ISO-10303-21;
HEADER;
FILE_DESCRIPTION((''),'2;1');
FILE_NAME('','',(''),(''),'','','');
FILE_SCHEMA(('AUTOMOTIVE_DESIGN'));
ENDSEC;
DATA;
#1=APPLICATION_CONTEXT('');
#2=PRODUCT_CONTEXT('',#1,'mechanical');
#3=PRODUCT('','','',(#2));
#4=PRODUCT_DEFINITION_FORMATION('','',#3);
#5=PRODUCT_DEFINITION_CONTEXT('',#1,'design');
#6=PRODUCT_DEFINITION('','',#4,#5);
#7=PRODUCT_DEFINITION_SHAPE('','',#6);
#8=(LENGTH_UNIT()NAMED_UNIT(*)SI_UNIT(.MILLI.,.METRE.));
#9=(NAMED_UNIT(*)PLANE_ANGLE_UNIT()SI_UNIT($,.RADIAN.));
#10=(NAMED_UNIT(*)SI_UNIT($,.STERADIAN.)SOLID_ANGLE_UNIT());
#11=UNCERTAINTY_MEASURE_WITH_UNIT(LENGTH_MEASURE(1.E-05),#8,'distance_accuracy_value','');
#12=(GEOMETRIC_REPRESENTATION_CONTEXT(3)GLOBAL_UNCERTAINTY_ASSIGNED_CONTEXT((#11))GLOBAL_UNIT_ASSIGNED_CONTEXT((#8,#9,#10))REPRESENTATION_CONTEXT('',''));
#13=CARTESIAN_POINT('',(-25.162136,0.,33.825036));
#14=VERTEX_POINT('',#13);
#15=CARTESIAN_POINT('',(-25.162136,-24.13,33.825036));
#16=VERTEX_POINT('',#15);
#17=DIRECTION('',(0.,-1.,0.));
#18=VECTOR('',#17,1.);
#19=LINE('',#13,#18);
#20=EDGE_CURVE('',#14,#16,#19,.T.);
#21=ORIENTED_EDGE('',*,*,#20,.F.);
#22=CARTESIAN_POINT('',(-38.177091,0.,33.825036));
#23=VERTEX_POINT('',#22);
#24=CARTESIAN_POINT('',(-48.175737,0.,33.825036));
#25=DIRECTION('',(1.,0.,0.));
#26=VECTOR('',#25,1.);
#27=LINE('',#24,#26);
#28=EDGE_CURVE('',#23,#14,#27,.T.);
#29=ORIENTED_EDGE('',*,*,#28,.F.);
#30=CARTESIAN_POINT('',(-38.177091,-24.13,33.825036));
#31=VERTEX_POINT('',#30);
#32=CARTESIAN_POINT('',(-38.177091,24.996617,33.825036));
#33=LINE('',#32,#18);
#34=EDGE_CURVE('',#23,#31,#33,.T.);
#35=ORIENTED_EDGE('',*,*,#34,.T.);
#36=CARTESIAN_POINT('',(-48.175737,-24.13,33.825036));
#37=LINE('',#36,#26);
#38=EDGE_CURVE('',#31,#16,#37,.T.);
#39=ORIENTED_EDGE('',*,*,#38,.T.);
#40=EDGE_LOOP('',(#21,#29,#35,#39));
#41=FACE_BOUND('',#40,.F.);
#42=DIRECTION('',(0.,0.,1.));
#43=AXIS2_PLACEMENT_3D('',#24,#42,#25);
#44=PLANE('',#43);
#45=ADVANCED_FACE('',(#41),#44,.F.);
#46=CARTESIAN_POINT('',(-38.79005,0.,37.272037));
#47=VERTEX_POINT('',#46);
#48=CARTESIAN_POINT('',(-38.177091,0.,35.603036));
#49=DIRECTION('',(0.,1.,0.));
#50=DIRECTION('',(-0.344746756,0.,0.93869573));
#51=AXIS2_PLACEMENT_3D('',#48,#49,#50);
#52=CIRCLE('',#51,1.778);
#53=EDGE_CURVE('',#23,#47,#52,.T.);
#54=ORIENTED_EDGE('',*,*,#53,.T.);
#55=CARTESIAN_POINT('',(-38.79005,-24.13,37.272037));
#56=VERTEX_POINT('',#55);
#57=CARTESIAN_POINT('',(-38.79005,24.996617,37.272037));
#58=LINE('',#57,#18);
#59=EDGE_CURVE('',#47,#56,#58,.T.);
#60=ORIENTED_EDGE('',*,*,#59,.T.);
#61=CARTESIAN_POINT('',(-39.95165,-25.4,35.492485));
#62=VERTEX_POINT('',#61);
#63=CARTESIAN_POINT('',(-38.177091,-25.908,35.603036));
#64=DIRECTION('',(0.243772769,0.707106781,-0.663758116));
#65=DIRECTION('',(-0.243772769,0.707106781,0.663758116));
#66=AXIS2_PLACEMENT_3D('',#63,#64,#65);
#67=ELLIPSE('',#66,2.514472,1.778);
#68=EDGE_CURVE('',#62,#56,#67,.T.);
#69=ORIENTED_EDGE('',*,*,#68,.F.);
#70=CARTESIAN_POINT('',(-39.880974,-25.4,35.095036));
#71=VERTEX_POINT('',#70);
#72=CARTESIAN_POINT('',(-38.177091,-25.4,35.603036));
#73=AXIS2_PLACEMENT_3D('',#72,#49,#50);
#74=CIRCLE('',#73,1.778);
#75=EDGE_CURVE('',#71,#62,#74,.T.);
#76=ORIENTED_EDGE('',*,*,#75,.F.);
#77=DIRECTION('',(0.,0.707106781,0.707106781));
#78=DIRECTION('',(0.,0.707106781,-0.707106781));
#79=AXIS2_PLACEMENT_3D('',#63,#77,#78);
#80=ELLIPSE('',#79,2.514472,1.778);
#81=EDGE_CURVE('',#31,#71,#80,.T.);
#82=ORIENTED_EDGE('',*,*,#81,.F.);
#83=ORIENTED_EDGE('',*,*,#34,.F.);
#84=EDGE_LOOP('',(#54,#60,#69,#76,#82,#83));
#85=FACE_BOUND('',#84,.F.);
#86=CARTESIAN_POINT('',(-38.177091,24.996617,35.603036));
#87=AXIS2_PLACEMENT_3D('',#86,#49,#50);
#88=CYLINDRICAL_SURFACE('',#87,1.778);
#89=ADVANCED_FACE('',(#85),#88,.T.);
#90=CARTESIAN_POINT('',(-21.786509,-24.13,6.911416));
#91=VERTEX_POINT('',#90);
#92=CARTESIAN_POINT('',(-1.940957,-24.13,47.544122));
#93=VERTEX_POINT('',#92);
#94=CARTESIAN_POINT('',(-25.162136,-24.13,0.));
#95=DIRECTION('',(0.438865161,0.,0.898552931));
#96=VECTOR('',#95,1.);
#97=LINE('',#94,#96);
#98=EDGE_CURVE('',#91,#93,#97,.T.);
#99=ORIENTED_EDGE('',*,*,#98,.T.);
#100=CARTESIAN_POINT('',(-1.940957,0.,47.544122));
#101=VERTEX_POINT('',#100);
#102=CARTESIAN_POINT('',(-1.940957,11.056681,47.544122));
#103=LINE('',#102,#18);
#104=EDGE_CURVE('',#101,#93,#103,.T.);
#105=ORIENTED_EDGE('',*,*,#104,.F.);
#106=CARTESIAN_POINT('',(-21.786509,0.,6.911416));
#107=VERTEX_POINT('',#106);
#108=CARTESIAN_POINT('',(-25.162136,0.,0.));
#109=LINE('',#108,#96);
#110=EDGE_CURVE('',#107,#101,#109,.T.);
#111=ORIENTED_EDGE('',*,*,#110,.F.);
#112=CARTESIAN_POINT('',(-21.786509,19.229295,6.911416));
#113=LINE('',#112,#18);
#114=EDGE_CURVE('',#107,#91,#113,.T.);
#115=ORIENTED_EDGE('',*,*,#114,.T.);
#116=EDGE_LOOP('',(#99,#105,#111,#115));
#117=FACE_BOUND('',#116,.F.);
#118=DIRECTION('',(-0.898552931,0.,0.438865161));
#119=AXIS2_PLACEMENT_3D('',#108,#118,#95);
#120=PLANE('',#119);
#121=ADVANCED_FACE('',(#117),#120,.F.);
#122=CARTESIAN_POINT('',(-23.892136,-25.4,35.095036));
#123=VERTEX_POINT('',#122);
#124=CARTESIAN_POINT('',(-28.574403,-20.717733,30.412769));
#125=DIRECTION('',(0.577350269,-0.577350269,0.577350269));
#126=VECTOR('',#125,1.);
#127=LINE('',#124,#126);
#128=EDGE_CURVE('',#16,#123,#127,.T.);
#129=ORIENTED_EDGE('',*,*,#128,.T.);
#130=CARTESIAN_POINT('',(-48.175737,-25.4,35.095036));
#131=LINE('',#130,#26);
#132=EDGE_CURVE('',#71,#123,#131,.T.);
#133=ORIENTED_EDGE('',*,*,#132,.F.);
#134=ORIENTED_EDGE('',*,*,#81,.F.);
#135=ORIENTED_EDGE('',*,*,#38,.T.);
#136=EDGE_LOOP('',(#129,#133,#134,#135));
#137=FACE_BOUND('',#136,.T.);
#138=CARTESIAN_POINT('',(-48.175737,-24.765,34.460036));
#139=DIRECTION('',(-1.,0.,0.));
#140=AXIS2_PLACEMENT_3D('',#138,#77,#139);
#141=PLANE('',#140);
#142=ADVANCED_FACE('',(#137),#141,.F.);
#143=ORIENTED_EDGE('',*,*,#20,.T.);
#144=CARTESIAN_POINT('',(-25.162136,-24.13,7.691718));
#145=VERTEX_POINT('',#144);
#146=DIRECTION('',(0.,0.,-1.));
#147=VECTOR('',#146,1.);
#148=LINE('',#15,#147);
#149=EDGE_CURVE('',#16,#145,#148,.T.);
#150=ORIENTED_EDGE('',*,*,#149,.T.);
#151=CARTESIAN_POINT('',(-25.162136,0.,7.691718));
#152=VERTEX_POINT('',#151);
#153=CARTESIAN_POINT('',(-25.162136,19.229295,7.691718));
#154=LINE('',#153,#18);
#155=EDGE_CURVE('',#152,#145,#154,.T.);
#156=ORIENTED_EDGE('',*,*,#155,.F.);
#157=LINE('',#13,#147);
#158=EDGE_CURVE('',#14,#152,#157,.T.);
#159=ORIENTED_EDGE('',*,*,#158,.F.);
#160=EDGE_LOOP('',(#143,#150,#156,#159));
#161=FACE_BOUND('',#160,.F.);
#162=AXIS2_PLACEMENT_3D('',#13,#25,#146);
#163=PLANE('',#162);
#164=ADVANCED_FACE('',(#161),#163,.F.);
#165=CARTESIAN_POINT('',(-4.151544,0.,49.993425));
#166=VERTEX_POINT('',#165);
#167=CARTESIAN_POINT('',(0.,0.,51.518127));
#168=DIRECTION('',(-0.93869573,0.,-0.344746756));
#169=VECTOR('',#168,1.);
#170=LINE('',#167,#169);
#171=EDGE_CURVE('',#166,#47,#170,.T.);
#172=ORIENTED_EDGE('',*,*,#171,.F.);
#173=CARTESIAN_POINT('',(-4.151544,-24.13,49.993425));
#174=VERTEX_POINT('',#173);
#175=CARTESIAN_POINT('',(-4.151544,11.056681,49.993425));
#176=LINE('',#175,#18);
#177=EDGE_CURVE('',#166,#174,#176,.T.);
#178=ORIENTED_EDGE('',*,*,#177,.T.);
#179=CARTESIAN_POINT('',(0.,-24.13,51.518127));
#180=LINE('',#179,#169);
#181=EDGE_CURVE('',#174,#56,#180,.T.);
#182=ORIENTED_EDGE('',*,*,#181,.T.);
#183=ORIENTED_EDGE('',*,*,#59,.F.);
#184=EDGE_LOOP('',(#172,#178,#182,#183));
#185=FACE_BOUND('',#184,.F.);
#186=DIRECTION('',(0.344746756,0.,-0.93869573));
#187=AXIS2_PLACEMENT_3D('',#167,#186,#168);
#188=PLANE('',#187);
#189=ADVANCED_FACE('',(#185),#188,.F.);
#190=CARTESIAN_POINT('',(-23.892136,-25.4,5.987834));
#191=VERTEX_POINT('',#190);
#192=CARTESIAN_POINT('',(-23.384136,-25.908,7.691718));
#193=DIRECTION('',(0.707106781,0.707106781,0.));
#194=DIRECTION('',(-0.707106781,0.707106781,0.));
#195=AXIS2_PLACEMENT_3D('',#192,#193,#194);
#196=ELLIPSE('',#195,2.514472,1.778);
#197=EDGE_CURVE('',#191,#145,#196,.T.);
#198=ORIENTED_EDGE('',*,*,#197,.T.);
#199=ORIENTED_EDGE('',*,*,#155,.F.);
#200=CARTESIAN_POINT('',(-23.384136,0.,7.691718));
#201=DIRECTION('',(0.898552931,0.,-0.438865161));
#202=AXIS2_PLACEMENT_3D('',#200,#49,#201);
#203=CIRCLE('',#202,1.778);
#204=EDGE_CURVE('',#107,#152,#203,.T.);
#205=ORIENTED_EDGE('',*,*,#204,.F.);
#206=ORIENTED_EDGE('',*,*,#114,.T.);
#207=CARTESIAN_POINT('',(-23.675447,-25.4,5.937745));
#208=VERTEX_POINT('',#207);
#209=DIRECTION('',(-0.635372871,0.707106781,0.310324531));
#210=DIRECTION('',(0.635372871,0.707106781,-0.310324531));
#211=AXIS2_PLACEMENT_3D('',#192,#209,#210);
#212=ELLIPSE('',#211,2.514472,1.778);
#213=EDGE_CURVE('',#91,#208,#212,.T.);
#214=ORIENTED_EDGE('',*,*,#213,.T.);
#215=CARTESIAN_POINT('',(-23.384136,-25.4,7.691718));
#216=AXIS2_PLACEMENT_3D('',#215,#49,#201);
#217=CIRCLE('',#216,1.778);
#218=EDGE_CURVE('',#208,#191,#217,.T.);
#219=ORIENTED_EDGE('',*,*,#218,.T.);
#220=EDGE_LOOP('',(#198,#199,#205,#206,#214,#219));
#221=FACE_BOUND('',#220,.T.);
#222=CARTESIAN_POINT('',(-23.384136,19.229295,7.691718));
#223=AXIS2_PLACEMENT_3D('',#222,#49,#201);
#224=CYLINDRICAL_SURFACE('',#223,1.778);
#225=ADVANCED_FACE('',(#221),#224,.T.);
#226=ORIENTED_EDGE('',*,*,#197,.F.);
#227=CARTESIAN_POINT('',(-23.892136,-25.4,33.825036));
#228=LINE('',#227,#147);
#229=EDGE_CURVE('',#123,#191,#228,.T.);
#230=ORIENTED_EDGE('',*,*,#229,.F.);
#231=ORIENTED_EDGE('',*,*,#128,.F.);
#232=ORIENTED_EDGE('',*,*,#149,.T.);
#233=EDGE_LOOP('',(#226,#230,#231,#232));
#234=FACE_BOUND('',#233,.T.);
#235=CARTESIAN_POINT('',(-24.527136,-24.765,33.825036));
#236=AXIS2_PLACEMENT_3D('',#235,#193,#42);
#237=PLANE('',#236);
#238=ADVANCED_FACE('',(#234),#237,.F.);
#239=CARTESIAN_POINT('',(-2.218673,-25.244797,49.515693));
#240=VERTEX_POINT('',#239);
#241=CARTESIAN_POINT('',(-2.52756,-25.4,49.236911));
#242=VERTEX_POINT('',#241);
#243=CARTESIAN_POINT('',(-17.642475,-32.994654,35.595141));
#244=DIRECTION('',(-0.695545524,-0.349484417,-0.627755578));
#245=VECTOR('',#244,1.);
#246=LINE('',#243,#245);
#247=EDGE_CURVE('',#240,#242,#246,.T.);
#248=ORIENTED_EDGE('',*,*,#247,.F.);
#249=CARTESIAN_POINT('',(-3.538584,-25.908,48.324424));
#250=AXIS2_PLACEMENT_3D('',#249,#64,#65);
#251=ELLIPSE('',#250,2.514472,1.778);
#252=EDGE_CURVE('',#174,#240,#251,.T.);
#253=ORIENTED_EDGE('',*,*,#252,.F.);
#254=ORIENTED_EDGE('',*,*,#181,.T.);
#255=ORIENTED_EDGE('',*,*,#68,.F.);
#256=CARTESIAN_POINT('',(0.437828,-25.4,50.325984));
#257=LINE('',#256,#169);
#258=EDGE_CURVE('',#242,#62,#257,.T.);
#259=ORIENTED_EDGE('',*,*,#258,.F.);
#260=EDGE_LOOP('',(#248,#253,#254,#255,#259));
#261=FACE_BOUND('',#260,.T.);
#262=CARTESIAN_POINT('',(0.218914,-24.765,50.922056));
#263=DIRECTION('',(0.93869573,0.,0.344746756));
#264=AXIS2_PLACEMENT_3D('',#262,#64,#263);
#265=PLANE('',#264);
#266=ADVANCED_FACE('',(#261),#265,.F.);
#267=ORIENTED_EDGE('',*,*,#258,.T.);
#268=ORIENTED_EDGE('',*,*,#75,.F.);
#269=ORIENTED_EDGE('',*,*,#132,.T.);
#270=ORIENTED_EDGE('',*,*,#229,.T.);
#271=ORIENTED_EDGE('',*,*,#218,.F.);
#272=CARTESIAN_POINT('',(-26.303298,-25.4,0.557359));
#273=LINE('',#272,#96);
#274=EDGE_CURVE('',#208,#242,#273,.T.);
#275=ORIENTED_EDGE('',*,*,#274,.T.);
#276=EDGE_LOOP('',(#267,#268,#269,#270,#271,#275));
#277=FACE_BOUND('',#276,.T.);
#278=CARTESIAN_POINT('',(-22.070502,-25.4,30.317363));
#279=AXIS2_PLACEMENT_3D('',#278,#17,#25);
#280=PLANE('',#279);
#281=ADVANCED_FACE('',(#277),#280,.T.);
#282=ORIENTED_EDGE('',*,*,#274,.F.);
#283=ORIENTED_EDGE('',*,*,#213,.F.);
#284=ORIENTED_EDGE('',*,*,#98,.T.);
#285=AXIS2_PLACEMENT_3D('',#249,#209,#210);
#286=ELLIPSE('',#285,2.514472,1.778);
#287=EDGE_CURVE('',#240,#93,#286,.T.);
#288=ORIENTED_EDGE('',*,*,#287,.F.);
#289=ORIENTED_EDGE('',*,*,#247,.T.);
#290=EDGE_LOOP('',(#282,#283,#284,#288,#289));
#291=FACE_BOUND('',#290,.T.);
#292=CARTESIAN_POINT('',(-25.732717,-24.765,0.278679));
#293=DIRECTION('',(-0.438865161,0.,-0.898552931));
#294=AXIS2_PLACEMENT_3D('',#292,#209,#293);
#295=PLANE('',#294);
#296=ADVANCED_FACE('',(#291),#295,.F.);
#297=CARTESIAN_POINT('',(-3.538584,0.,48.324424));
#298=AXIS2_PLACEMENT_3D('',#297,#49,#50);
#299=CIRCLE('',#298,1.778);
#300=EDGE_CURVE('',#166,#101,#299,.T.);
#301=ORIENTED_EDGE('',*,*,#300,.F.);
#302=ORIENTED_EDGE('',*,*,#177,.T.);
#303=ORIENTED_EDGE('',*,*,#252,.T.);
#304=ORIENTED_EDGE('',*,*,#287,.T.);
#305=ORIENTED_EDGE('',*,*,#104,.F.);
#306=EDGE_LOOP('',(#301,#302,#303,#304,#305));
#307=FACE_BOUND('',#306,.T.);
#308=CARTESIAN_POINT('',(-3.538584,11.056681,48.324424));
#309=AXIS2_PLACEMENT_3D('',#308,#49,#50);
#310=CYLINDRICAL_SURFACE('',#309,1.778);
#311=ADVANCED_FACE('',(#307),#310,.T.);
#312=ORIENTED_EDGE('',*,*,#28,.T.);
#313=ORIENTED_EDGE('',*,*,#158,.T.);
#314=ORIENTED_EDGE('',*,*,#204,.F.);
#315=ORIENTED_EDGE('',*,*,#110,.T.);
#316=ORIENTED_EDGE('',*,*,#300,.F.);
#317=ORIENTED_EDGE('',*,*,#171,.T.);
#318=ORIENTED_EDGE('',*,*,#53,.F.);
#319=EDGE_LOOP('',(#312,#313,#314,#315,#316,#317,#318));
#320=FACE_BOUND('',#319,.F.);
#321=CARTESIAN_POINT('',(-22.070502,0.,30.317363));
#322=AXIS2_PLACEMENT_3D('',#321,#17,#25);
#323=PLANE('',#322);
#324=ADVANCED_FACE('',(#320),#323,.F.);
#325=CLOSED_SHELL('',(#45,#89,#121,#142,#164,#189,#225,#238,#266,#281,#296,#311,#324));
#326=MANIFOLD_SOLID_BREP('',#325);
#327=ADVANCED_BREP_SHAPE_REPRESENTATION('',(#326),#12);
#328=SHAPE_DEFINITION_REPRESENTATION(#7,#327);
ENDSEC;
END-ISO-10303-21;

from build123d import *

# Parameters (mm, degrees)
F1_DEPTH    = 25.4
F2_SIZE     = 1.27
F3_T1_DEPTH = 62.588590634
F3_T3_DEPTH = 46.2433618017
F3_T5_DEPTH = 74.1232333831


# Not quite as in the source:
# - a fillet or chamfer that OpenCascade refuses, or shapes differently, is made with other operations: its cross-section is extruded or revolved along the edge and cut away or added


with BuildPart() as f1:
    # F0 (on Front) → F1 (new body)
    with BuildSketch(Plane.XZ):
        Polygon((0, 51.5181273222), (-48.1757372618, 33.8250361383), (-25.1621361822, 33.8250361383), (-25.1621361822, 0), align=None)
    extrude(amount=F1_DEPTH)

    # F2
    f2_edges = [f1.edges().sort_by_distance(p)[0] for p in [
        (-25.162136, -25.4, 16.912518),
        (-12.581068, -25.4, 25.759064),
        (-36.668937, -25.4, 33.825036),
        (-24.087869, -25.4, 42.671582),
    ]]
    chamfer(f2_edges, length=F2_SIZE)

    # F3: fillet of radius 1.778 on 3 edges, made by hand

    # F3_s2 → F3_t1 (cut)
    with BuildSketch(Plane.XZ.offset(-19.229295317)):
        with BuildLine():
            ThreePointArc((-21.78650907, 6.911415871), (-23.7845753127, 5.9593981498), (-25.1621361822, 7.6917181268))
            Line((-25.1621361822, 7.6917181268), (-25.1621361822, 0))
            Line((-25.1621361822, 0), (-21.78650907, 6.911415871))
        make_face()
    extrude(amount=F3_T1_DEPTH, mode=Mode.SUBTRACT)

    # F3_s4 → F3_t3 (cut)
    with BuildSketch(Plane.XZ.offset(-11.0566809008)):
        with BuildLine():
            ThreePointArc((-4.1515436611, 49.9934253721), (-2.2186732944, 49.5156925609), (-1.9409568164, 47.5441221078))
            Line((-1.9409568164, 47.5441221078), (0, 51.5181273222))
            Line((0, 51.5181273222), (-4.1515436611, 49.9934253721))
        make_face()
    extrude(amount=F3_T3_DEPTH, mode=Mode.SUBTRACT)

    # F3_s6 → F3_t5 (cut)
    with BuildSketch(Plane.XZ.offset(-24.9966166916)):
        with BuildLine():
            ThreePointArc((-38.7900503177, 37.2720371468), (-39.9276287585, 35.2917483238), (-38.1770905851, 33.8250361383))
            Line((-38.1770905851, 33.8250361383), (-48.1757372618, 33.8250361383))
            Line((-48.1757372618, 33.8250361383), (-38.7900503177, 37.2720371468))
        make_face()
    extrude(amount=F3_T5_DEPTH, mode=Mode.SUBTRACT)


solid = f1.part
